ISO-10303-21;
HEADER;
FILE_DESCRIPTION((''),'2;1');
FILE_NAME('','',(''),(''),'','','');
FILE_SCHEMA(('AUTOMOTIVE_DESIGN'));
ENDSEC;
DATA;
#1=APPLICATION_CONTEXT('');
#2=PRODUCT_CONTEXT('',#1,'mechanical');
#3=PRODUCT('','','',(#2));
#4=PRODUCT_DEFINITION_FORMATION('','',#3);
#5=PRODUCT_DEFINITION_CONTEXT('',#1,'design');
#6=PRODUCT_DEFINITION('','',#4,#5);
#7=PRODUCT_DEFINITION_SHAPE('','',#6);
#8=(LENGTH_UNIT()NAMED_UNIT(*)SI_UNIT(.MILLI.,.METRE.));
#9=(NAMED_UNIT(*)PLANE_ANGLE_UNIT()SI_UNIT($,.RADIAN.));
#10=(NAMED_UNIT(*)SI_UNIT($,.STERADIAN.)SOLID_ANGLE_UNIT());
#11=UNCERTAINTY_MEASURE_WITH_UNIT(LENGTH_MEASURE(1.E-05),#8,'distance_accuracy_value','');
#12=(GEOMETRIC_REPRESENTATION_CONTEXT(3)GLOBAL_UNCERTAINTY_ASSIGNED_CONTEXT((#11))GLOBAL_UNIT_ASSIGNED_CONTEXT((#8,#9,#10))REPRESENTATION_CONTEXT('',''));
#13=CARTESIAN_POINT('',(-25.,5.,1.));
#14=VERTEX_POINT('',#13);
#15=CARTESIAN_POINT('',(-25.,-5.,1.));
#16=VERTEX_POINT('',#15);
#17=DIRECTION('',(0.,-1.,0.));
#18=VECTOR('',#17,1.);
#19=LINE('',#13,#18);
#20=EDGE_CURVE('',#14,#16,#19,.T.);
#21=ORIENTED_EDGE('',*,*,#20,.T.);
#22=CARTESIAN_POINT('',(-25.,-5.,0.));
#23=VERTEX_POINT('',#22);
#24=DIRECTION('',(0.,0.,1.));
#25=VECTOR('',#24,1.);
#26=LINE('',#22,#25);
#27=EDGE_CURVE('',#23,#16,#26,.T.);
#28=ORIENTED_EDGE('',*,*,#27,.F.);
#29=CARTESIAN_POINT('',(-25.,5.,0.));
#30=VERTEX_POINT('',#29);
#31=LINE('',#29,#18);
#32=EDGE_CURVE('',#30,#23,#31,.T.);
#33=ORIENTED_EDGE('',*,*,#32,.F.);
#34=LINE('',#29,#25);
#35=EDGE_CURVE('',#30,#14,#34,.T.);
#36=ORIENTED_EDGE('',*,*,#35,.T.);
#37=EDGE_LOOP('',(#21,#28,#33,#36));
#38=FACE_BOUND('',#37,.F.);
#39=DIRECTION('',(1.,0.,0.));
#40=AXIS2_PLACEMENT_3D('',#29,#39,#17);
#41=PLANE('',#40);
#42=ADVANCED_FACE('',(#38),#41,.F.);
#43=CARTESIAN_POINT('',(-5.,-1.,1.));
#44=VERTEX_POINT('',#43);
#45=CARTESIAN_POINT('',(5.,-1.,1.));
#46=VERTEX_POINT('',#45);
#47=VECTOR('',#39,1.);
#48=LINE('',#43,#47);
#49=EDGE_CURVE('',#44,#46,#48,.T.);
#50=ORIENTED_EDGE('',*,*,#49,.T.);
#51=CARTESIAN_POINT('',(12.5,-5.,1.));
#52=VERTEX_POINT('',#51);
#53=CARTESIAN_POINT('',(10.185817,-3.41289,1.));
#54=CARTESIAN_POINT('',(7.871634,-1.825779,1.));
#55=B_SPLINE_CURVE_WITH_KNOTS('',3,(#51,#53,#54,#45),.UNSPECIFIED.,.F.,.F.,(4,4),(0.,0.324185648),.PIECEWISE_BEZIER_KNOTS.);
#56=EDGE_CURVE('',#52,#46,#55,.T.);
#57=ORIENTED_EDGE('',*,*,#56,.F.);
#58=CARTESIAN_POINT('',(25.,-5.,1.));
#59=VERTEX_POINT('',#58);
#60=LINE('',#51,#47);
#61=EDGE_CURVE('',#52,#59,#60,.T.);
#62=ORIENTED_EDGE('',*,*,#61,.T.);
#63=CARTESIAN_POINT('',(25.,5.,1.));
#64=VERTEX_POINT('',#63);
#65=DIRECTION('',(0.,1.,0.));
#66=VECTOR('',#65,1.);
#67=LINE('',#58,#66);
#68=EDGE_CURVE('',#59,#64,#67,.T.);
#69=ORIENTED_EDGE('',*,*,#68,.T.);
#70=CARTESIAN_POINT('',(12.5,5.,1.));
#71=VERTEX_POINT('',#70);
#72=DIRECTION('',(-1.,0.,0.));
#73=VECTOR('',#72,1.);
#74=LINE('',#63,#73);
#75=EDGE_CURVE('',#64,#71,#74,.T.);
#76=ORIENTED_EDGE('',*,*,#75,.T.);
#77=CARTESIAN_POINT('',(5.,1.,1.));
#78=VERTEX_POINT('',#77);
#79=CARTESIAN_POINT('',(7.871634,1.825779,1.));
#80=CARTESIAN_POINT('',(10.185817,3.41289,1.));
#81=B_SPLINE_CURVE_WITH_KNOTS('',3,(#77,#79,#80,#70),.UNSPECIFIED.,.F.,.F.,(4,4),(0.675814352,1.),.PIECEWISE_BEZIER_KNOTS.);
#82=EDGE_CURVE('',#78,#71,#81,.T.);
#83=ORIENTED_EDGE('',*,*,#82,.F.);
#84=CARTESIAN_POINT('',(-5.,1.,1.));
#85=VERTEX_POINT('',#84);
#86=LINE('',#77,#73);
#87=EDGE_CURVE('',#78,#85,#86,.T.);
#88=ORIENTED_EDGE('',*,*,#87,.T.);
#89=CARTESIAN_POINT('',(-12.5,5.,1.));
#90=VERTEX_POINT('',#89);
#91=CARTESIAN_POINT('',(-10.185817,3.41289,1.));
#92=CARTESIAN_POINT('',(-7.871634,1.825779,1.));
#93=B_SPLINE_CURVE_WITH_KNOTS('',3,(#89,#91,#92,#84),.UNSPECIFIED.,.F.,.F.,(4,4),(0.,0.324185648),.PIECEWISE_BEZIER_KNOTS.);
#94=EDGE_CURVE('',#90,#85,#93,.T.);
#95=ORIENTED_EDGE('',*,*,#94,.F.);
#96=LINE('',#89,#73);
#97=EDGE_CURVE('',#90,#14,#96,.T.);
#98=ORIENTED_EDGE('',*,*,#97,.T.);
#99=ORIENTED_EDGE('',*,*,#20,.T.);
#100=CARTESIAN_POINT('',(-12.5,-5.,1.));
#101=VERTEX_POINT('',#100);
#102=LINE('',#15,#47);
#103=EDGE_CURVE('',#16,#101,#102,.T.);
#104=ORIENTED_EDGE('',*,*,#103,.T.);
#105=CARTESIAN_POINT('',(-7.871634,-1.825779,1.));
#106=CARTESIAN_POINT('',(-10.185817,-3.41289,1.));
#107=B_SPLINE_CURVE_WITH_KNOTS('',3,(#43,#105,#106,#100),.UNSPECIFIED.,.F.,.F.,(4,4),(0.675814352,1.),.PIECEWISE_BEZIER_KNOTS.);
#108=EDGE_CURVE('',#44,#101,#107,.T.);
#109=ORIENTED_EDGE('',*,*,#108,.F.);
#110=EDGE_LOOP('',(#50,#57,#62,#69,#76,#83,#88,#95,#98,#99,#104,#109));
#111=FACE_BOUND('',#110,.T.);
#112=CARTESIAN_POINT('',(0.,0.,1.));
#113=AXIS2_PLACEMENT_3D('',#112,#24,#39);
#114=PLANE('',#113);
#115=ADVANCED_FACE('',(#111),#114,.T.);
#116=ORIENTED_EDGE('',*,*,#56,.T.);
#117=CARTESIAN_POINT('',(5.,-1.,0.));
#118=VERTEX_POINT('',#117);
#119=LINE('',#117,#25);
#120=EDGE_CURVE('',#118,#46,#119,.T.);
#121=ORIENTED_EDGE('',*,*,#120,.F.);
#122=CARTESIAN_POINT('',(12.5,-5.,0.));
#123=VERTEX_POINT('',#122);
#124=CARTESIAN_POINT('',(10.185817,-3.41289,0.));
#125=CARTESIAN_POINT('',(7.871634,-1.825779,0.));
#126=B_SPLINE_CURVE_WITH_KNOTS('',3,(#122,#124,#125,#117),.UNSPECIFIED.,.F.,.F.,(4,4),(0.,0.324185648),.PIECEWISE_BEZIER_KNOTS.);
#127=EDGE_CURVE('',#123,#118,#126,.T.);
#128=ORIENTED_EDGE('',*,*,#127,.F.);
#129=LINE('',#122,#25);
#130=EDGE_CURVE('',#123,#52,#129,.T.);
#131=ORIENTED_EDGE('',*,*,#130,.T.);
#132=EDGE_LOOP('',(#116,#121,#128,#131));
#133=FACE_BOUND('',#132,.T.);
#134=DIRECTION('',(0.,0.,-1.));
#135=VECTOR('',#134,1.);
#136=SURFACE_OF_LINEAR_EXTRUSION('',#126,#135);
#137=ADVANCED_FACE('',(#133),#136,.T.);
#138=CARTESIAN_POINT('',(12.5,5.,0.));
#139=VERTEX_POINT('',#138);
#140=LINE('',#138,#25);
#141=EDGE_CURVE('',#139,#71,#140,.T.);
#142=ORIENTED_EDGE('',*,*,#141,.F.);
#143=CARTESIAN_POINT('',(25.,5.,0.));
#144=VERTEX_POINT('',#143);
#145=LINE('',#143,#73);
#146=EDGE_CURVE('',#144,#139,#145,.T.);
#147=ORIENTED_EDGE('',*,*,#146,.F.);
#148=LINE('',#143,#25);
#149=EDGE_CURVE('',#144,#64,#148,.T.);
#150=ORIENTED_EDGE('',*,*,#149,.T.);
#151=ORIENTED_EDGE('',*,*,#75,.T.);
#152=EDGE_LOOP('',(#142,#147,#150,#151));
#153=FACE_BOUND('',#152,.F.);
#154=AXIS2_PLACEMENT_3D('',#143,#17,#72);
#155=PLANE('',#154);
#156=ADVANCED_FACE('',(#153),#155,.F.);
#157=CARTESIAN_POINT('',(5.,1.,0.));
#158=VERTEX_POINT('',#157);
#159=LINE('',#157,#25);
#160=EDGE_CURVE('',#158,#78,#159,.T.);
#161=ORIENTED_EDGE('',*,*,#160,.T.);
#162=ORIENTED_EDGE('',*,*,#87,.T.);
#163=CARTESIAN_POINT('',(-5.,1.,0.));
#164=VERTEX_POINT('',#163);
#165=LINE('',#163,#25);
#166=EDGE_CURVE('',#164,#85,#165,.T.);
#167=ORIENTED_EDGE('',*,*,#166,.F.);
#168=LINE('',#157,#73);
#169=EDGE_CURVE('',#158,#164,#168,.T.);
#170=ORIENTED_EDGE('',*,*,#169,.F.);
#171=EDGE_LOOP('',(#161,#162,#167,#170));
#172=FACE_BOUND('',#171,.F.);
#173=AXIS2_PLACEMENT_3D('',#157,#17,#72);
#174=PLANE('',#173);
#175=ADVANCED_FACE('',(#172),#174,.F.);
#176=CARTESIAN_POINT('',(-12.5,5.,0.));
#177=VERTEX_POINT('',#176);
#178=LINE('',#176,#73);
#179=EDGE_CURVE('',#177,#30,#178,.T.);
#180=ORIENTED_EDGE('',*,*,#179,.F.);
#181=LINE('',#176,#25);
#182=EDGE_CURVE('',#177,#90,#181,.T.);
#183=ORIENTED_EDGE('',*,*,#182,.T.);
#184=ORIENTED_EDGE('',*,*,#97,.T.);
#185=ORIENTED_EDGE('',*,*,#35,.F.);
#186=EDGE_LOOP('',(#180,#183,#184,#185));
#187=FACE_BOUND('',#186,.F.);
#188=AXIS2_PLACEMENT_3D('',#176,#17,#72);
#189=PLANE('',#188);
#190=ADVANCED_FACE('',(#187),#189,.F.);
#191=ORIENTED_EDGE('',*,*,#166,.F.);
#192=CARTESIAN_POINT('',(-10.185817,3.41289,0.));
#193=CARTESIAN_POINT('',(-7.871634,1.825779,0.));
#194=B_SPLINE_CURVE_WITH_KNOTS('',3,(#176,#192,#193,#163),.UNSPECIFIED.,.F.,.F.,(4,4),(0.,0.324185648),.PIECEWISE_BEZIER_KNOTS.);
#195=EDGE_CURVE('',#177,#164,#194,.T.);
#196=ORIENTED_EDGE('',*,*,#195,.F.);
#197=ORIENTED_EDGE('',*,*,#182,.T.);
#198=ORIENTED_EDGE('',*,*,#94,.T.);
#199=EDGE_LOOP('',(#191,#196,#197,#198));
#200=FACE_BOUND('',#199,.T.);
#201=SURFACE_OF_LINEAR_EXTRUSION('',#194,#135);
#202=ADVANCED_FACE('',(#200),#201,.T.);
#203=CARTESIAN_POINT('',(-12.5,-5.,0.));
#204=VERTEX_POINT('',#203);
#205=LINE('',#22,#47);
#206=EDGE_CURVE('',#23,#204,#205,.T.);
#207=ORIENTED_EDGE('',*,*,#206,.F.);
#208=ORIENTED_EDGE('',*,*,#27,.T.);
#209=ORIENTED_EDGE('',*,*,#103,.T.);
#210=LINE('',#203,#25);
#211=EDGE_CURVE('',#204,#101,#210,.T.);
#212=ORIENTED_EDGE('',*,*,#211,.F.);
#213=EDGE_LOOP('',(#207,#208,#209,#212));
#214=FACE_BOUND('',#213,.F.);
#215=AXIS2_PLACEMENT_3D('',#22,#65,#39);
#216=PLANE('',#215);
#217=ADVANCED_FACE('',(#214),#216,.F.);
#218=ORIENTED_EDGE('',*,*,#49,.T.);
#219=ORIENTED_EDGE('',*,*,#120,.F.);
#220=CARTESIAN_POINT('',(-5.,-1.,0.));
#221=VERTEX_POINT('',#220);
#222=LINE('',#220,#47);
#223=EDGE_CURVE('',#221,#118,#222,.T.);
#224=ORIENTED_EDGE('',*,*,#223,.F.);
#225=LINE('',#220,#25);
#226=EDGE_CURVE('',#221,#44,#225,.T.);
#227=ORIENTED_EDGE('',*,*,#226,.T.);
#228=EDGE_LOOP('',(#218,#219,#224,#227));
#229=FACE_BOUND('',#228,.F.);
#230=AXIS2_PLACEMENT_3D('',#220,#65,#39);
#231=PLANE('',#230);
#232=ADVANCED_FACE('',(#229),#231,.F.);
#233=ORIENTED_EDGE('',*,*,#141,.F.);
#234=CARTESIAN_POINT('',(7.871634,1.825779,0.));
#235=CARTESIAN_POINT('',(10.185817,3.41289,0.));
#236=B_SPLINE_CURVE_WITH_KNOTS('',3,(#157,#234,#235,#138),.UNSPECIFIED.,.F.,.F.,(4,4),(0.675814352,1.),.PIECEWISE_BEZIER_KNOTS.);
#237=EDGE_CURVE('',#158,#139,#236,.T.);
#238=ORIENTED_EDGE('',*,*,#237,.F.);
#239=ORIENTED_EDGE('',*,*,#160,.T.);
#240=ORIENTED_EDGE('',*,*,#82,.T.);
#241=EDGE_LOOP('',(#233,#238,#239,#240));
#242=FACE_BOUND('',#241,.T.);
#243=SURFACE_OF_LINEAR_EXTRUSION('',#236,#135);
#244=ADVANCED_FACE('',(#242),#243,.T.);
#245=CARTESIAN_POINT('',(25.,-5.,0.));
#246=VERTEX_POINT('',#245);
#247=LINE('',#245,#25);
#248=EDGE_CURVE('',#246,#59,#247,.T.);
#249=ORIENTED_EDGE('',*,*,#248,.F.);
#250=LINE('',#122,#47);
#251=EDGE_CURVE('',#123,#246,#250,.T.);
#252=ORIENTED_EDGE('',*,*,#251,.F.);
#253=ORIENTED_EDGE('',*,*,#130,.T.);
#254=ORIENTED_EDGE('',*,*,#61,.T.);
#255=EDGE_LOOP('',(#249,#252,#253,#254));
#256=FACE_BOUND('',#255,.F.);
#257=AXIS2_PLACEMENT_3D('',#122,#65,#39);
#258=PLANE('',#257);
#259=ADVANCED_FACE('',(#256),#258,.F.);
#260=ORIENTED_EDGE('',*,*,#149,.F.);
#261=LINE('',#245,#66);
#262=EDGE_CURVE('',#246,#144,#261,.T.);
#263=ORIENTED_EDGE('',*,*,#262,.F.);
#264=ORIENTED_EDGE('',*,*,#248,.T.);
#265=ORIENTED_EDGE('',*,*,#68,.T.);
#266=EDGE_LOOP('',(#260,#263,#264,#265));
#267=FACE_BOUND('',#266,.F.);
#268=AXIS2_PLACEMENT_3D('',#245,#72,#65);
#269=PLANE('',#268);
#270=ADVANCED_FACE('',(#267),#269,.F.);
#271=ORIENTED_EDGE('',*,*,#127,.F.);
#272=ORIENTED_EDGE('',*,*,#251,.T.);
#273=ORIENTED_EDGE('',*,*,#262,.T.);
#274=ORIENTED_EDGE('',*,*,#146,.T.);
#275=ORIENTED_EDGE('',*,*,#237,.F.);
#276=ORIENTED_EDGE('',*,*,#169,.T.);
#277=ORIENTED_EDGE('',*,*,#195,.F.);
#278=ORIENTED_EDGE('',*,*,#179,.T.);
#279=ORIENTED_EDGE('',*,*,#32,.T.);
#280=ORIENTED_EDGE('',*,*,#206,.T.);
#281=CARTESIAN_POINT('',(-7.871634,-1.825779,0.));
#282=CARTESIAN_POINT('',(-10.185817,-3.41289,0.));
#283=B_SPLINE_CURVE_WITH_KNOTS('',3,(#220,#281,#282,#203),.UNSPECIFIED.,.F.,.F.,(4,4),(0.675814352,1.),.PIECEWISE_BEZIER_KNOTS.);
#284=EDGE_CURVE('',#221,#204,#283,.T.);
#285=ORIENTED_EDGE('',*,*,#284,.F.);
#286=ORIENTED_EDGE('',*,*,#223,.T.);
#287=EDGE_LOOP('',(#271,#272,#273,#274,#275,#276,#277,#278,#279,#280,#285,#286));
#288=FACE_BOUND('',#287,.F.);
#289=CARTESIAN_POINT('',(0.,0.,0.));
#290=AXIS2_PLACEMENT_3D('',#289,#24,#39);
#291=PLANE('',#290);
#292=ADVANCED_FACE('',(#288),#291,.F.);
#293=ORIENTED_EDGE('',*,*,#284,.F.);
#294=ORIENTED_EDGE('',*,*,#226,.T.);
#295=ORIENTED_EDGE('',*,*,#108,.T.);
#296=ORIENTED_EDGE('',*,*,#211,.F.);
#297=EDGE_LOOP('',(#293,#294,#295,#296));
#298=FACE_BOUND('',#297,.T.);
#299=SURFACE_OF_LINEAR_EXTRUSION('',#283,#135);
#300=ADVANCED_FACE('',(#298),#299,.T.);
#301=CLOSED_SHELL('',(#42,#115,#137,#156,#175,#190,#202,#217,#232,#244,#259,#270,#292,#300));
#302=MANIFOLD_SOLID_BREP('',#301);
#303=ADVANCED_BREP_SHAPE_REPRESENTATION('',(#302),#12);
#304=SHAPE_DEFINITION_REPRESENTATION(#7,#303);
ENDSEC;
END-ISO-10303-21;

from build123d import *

# Parameters (mm, degrees)
F1_DEPTH = 1


with BuildPart() as f1:
    # F0 (on Top) → F1 (new body)
    with BuildSketch(Plane.XY):
        with BuildLine():
            Line((-12.5, 5), (-20, 5))
            Line((-20, 5), (-25, 5))
            Line((-25, 5), (-25, -5))
            Line((-25, -5), (-20, -5))
            Line((-20, -5), (-12.5, -5))
            add(Edge.make_bspline(
                [(-5, -1), (-7.8716344223, -1.8257793632), (-10.1858172112, -3.4128896816), (-12.5, -5)],
                knots=[0.6758143524, 0.6758143524, 0.6758143524, 0.6758143524, 1, 1, 1, 1], degree=3))
            add(Edge.make_bspline(
                [(5, -1), (1.8852751504, -0.1043165234), (-1.8852751504, -0.1043165234), (-5, -1)],
                knots=[0.3241856476, 0.3241856476, 0.3241856476, 0.3241856476, 0.6758143524, 0.6758143524, 0.6758143524, 0.6758143524], degree=3))
            add(Edge.make_bspline(
                [(12.5, -5), (10.1858172112, -3.4128896816), (7.8716344223, -1.8257793632), (5, -1)],
                knots=[0, 0, 0, 0, 0.3241856476, 0.3241856476, 0.3241856476, 0.3241856476], degree=3))
            Line((12.5, -5), (20, -5))
            Line((20, -5), (25, -5))
            Line((25, -5), (25, 5))
            Line((25, 5), (20, 5))
            Line((20, 5), (12.5, 5))
            add(Edge.make_bspline(
                [(5, 1), (7.8716344223, 1.8257793632), (10.1858172112, 3.4128896816), (12.5, 5)],
                knots=[0.6758143524, 0.6758143524, 0.6758143524, 0.6758143524, 1, 1, 1, 1], degree=3))
            add(Edge.make_bspline(
                [(-5, 1), (-1.8852751504, 0.1043165234), (1.8852751504, 0.1043165234), (5, 1)],
                knots=[0.3241856476, 0.3241856476, 0.3241856476, 0.3241856476, 0.6758143524, 0.6758143524, 0.6758143524, 0.6758143524], degree=3))
            add(Edge.make_bspline(
                [(-12.5, 5), (-10.1858172112, 3.4128896816), (-7.8716344223, 1.8257793632), (-5, 1)],
                knots=[0, 0, 0, 0, 0.3241856476, 0.3241856476, 0.3241856476, 0.3241856476], degree=3))
        make_face()
        with BuildLine():
            Line((5, 1), (-5, 1))
            add(Edge.make_bspline(
                [(-5, 1), (-1.8852751504, 0.1043165234), (1.8852751504, 0.1043165234), (5, 1)],
                knots=[0.3241856476, 0.3241856476, 0.3241856476, 0.3241856476, 0.6758143524, 0.6758143524, 0.6758143524, 0.6758143524], degree=3))
        make_face()
        with BuildLine():
            add(Edge.make_bspline(
                [(5, -1), (1.8852751504, -0.1043165234), (-1.8852751504, -0.1043165234), (-5, -1)],
                knots=[0.3241856476, 0.3241856476, 0.3241856476, 0.3241856476, 0.6758143524, 0.6758143524, 0.6758143524, 0.6758143524], degree=3))
            Line((-5, -1), (5, -1))
        make_face()
    extrude(amount=F1_DEPTH)


solid = f1.part
